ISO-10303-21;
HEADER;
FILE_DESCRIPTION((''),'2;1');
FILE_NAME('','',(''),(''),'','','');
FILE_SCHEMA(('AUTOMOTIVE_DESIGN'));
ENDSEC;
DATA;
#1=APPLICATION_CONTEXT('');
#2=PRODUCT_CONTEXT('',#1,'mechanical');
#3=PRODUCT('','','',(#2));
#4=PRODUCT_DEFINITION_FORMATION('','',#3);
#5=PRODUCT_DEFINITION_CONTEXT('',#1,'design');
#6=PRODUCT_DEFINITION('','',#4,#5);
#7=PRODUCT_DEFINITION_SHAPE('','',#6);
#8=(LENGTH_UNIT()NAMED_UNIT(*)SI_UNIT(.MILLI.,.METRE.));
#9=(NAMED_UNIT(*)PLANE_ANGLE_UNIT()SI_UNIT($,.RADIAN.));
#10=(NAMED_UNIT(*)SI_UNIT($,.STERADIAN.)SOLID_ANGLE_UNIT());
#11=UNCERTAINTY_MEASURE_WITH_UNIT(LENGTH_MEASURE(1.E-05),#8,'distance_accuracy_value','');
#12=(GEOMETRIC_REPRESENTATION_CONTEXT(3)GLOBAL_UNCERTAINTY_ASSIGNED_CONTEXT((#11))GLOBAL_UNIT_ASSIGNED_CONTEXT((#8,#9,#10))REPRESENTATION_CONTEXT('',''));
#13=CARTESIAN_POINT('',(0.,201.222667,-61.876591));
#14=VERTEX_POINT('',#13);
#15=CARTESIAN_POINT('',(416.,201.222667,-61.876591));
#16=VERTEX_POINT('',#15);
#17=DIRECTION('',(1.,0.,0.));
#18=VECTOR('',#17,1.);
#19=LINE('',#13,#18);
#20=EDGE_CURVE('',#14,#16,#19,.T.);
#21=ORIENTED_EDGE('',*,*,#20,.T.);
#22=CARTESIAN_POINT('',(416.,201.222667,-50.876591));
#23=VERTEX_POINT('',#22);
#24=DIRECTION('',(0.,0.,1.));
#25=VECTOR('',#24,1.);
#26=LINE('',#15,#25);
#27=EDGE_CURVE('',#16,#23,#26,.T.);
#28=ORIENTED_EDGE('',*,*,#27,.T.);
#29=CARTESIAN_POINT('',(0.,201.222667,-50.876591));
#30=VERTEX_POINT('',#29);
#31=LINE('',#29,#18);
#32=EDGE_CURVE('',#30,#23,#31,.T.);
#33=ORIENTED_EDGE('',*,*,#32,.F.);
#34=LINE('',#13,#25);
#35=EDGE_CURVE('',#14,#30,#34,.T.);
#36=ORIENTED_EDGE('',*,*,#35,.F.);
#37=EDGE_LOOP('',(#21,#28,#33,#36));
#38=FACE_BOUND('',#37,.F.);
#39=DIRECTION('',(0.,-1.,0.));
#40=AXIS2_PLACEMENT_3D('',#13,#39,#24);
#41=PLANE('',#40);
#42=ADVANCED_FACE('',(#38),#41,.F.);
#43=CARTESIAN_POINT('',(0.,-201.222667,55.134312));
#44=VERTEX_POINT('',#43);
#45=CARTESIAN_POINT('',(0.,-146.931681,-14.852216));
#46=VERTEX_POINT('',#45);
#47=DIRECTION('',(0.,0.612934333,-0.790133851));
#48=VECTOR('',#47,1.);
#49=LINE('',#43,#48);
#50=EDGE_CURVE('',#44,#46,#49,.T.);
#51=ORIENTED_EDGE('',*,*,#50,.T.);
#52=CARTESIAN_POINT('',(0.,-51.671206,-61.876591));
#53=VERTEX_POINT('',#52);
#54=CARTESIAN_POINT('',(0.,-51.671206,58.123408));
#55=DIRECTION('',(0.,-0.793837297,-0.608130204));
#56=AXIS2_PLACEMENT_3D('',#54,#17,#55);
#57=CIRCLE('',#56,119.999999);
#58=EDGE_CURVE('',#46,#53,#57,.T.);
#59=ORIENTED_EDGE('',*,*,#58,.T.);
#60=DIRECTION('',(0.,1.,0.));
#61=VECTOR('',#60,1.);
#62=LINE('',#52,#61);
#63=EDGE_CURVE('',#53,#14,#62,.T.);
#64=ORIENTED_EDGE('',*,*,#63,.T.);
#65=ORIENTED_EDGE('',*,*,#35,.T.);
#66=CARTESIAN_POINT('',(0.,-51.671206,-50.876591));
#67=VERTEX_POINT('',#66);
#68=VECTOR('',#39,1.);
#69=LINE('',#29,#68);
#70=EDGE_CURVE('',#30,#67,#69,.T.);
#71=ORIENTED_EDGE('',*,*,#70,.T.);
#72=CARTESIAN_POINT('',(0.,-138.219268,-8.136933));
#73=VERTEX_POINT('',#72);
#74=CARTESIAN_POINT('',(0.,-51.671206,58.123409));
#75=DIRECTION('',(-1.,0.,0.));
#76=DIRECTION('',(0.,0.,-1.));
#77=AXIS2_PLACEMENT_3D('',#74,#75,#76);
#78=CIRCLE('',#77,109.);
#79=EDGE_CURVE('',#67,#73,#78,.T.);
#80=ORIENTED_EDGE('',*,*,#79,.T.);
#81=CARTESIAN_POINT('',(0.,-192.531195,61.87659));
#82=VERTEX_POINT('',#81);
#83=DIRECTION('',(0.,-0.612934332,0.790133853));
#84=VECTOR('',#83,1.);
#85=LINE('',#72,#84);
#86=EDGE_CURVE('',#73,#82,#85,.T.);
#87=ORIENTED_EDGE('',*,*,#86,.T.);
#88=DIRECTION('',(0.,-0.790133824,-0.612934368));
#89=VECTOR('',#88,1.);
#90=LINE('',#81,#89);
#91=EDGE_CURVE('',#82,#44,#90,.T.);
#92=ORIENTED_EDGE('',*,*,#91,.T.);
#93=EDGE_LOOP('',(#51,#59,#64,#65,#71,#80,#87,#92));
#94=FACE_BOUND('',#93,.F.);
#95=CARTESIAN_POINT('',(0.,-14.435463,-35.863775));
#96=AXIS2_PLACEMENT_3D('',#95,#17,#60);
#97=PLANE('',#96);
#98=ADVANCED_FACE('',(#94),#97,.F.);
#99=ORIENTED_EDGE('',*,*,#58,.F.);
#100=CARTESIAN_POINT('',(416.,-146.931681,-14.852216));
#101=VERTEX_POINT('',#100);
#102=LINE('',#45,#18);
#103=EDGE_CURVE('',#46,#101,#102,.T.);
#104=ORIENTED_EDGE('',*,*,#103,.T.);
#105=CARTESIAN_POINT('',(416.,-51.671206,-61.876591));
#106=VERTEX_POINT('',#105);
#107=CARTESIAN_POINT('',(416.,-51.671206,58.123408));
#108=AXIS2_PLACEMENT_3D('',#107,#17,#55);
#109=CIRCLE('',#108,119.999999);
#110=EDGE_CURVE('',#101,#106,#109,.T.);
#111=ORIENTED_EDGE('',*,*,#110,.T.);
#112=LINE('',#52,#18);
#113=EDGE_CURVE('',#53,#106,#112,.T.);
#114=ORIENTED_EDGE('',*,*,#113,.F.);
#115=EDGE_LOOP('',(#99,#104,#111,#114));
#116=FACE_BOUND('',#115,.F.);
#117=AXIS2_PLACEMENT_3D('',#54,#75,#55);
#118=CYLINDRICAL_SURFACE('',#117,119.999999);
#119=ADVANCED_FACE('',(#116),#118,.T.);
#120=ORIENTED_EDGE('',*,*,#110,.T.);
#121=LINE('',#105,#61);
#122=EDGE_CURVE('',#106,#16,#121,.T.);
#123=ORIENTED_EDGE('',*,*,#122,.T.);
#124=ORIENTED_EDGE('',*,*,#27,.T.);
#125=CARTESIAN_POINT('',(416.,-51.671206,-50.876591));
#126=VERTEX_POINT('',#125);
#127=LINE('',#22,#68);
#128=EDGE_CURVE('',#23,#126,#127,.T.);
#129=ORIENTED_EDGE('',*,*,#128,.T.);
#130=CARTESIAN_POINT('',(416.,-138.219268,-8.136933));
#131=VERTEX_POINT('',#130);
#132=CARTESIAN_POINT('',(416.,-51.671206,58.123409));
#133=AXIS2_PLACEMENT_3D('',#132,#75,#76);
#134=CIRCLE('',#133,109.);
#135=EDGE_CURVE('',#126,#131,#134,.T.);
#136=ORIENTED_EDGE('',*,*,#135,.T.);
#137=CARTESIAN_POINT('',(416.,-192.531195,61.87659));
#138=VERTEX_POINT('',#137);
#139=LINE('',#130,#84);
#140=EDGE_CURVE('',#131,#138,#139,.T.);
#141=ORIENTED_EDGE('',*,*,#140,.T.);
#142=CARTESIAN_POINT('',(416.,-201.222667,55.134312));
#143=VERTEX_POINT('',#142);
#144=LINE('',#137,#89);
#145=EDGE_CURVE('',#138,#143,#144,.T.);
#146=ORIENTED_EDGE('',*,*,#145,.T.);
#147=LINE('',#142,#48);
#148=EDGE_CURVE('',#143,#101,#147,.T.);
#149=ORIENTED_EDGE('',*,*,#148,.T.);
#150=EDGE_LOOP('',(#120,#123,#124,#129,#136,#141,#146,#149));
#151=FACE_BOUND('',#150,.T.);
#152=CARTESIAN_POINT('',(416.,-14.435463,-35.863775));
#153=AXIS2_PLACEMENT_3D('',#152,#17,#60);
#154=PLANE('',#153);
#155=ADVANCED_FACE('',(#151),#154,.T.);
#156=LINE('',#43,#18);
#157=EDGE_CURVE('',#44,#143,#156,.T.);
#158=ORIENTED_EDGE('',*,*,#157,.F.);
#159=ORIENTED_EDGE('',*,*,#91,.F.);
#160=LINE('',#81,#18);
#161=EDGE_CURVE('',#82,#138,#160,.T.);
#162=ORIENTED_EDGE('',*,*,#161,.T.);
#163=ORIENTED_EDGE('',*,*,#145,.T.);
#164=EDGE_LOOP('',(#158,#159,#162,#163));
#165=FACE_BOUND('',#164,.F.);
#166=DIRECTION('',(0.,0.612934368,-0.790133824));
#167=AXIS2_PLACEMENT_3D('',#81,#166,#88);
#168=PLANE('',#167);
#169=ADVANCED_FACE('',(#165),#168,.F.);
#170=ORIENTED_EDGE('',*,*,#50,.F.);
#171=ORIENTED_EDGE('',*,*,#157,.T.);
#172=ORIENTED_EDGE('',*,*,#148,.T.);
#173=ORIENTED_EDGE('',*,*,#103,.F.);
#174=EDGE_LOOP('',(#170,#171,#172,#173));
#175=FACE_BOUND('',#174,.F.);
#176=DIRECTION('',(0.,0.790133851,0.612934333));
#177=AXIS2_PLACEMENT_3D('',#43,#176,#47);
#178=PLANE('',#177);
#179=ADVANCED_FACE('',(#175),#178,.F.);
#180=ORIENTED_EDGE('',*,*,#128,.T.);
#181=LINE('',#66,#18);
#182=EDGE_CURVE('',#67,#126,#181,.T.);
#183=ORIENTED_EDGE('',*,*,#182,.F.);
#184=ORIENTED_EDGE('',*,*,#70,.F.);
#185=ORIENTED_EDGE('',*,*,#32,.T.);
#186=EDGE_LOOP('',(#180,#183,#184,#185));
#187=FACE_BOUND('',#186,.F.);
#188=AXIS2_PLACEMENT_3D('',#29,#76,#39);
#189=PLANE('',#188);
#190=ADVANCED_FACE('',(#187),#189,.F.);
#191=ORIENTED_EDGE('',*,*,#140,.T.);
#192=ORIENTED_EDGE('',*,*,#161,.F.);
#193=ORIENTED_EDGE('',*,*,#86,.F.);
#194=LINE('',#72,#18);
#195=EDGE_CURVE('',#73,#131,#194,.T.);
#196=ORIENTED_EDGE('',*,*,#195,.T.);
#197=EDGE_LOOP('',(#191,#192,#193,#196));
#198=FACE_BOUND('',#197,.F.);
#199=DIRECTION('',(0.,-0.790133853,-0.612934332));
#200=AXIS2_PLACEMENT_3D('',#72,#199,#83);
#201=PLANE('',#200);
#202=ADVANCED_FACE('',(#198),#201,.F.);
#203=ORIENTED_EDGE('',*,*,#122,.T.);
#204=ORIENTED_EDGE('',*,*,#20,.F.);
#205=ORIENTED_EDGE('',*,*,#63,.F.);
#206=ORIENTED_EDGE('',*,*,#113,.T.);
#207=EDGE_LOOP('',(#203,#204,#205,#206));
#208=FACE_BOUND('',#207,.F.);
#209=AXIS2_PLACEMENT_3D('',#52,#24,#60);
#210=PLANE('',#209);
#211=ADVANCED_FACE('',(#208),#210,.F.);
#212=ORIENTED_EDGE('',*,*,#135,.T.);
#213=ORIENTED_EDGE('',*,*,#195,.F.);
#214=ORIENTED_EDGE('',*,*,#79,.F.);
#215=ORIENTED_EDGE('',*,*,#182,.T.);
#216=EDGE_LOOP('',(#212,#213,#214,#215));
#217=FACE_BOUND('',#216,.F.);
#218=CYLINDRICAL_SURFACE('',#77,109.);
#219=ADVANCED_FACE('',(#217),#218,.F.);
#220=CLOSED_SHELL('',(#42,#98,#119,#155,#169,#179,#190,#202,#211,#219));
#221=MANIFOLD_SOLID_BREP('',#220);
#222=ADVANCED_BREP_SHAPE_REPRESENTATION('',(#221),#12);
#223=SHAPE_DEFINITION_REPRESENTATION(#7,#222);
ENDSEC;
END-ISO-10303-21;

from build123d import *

# Parameters (mm, degrees)
F1_DEPTH = 416


# Not quite as in the source:
# - ends of sketch curves that miss each other by under 0.0002 mm in the source are joined


with BuildPart() as f1:
    # F0 (on Right) → F1 (new body)
    with BuildSketch(Plane.YZ):
        with BuildLine():
            Line((201.222667, -50.876591), (-51.671206, -50.876591))
            ThreePointArc((-51.671206, -50.876591), (-99.9341457634, -39.609331908), (-138.2192681533, -8.1369331174))
            Line((-138.2192681533, -8.1369331174), (-192.531195, 61.87659))
            Line((-192.531195, 61.87659), (-201.222667, 55.134312))
            Line((-201.222667, 55.134312), (-146.931681, -14.852216))
            ThreePointArc((-146.931681, -14.852216), (-104.7886465547, -49.480203899), (-51.671206, -61.876591))
            Line((-51.671206, -61.876591), (201.222667, -61.876591))
            Line((201.222667, -61.876591), (201.222667, -50.876591))
        make_face()
    extrude(amount=F1_DEPTH)


solid = f1.part
